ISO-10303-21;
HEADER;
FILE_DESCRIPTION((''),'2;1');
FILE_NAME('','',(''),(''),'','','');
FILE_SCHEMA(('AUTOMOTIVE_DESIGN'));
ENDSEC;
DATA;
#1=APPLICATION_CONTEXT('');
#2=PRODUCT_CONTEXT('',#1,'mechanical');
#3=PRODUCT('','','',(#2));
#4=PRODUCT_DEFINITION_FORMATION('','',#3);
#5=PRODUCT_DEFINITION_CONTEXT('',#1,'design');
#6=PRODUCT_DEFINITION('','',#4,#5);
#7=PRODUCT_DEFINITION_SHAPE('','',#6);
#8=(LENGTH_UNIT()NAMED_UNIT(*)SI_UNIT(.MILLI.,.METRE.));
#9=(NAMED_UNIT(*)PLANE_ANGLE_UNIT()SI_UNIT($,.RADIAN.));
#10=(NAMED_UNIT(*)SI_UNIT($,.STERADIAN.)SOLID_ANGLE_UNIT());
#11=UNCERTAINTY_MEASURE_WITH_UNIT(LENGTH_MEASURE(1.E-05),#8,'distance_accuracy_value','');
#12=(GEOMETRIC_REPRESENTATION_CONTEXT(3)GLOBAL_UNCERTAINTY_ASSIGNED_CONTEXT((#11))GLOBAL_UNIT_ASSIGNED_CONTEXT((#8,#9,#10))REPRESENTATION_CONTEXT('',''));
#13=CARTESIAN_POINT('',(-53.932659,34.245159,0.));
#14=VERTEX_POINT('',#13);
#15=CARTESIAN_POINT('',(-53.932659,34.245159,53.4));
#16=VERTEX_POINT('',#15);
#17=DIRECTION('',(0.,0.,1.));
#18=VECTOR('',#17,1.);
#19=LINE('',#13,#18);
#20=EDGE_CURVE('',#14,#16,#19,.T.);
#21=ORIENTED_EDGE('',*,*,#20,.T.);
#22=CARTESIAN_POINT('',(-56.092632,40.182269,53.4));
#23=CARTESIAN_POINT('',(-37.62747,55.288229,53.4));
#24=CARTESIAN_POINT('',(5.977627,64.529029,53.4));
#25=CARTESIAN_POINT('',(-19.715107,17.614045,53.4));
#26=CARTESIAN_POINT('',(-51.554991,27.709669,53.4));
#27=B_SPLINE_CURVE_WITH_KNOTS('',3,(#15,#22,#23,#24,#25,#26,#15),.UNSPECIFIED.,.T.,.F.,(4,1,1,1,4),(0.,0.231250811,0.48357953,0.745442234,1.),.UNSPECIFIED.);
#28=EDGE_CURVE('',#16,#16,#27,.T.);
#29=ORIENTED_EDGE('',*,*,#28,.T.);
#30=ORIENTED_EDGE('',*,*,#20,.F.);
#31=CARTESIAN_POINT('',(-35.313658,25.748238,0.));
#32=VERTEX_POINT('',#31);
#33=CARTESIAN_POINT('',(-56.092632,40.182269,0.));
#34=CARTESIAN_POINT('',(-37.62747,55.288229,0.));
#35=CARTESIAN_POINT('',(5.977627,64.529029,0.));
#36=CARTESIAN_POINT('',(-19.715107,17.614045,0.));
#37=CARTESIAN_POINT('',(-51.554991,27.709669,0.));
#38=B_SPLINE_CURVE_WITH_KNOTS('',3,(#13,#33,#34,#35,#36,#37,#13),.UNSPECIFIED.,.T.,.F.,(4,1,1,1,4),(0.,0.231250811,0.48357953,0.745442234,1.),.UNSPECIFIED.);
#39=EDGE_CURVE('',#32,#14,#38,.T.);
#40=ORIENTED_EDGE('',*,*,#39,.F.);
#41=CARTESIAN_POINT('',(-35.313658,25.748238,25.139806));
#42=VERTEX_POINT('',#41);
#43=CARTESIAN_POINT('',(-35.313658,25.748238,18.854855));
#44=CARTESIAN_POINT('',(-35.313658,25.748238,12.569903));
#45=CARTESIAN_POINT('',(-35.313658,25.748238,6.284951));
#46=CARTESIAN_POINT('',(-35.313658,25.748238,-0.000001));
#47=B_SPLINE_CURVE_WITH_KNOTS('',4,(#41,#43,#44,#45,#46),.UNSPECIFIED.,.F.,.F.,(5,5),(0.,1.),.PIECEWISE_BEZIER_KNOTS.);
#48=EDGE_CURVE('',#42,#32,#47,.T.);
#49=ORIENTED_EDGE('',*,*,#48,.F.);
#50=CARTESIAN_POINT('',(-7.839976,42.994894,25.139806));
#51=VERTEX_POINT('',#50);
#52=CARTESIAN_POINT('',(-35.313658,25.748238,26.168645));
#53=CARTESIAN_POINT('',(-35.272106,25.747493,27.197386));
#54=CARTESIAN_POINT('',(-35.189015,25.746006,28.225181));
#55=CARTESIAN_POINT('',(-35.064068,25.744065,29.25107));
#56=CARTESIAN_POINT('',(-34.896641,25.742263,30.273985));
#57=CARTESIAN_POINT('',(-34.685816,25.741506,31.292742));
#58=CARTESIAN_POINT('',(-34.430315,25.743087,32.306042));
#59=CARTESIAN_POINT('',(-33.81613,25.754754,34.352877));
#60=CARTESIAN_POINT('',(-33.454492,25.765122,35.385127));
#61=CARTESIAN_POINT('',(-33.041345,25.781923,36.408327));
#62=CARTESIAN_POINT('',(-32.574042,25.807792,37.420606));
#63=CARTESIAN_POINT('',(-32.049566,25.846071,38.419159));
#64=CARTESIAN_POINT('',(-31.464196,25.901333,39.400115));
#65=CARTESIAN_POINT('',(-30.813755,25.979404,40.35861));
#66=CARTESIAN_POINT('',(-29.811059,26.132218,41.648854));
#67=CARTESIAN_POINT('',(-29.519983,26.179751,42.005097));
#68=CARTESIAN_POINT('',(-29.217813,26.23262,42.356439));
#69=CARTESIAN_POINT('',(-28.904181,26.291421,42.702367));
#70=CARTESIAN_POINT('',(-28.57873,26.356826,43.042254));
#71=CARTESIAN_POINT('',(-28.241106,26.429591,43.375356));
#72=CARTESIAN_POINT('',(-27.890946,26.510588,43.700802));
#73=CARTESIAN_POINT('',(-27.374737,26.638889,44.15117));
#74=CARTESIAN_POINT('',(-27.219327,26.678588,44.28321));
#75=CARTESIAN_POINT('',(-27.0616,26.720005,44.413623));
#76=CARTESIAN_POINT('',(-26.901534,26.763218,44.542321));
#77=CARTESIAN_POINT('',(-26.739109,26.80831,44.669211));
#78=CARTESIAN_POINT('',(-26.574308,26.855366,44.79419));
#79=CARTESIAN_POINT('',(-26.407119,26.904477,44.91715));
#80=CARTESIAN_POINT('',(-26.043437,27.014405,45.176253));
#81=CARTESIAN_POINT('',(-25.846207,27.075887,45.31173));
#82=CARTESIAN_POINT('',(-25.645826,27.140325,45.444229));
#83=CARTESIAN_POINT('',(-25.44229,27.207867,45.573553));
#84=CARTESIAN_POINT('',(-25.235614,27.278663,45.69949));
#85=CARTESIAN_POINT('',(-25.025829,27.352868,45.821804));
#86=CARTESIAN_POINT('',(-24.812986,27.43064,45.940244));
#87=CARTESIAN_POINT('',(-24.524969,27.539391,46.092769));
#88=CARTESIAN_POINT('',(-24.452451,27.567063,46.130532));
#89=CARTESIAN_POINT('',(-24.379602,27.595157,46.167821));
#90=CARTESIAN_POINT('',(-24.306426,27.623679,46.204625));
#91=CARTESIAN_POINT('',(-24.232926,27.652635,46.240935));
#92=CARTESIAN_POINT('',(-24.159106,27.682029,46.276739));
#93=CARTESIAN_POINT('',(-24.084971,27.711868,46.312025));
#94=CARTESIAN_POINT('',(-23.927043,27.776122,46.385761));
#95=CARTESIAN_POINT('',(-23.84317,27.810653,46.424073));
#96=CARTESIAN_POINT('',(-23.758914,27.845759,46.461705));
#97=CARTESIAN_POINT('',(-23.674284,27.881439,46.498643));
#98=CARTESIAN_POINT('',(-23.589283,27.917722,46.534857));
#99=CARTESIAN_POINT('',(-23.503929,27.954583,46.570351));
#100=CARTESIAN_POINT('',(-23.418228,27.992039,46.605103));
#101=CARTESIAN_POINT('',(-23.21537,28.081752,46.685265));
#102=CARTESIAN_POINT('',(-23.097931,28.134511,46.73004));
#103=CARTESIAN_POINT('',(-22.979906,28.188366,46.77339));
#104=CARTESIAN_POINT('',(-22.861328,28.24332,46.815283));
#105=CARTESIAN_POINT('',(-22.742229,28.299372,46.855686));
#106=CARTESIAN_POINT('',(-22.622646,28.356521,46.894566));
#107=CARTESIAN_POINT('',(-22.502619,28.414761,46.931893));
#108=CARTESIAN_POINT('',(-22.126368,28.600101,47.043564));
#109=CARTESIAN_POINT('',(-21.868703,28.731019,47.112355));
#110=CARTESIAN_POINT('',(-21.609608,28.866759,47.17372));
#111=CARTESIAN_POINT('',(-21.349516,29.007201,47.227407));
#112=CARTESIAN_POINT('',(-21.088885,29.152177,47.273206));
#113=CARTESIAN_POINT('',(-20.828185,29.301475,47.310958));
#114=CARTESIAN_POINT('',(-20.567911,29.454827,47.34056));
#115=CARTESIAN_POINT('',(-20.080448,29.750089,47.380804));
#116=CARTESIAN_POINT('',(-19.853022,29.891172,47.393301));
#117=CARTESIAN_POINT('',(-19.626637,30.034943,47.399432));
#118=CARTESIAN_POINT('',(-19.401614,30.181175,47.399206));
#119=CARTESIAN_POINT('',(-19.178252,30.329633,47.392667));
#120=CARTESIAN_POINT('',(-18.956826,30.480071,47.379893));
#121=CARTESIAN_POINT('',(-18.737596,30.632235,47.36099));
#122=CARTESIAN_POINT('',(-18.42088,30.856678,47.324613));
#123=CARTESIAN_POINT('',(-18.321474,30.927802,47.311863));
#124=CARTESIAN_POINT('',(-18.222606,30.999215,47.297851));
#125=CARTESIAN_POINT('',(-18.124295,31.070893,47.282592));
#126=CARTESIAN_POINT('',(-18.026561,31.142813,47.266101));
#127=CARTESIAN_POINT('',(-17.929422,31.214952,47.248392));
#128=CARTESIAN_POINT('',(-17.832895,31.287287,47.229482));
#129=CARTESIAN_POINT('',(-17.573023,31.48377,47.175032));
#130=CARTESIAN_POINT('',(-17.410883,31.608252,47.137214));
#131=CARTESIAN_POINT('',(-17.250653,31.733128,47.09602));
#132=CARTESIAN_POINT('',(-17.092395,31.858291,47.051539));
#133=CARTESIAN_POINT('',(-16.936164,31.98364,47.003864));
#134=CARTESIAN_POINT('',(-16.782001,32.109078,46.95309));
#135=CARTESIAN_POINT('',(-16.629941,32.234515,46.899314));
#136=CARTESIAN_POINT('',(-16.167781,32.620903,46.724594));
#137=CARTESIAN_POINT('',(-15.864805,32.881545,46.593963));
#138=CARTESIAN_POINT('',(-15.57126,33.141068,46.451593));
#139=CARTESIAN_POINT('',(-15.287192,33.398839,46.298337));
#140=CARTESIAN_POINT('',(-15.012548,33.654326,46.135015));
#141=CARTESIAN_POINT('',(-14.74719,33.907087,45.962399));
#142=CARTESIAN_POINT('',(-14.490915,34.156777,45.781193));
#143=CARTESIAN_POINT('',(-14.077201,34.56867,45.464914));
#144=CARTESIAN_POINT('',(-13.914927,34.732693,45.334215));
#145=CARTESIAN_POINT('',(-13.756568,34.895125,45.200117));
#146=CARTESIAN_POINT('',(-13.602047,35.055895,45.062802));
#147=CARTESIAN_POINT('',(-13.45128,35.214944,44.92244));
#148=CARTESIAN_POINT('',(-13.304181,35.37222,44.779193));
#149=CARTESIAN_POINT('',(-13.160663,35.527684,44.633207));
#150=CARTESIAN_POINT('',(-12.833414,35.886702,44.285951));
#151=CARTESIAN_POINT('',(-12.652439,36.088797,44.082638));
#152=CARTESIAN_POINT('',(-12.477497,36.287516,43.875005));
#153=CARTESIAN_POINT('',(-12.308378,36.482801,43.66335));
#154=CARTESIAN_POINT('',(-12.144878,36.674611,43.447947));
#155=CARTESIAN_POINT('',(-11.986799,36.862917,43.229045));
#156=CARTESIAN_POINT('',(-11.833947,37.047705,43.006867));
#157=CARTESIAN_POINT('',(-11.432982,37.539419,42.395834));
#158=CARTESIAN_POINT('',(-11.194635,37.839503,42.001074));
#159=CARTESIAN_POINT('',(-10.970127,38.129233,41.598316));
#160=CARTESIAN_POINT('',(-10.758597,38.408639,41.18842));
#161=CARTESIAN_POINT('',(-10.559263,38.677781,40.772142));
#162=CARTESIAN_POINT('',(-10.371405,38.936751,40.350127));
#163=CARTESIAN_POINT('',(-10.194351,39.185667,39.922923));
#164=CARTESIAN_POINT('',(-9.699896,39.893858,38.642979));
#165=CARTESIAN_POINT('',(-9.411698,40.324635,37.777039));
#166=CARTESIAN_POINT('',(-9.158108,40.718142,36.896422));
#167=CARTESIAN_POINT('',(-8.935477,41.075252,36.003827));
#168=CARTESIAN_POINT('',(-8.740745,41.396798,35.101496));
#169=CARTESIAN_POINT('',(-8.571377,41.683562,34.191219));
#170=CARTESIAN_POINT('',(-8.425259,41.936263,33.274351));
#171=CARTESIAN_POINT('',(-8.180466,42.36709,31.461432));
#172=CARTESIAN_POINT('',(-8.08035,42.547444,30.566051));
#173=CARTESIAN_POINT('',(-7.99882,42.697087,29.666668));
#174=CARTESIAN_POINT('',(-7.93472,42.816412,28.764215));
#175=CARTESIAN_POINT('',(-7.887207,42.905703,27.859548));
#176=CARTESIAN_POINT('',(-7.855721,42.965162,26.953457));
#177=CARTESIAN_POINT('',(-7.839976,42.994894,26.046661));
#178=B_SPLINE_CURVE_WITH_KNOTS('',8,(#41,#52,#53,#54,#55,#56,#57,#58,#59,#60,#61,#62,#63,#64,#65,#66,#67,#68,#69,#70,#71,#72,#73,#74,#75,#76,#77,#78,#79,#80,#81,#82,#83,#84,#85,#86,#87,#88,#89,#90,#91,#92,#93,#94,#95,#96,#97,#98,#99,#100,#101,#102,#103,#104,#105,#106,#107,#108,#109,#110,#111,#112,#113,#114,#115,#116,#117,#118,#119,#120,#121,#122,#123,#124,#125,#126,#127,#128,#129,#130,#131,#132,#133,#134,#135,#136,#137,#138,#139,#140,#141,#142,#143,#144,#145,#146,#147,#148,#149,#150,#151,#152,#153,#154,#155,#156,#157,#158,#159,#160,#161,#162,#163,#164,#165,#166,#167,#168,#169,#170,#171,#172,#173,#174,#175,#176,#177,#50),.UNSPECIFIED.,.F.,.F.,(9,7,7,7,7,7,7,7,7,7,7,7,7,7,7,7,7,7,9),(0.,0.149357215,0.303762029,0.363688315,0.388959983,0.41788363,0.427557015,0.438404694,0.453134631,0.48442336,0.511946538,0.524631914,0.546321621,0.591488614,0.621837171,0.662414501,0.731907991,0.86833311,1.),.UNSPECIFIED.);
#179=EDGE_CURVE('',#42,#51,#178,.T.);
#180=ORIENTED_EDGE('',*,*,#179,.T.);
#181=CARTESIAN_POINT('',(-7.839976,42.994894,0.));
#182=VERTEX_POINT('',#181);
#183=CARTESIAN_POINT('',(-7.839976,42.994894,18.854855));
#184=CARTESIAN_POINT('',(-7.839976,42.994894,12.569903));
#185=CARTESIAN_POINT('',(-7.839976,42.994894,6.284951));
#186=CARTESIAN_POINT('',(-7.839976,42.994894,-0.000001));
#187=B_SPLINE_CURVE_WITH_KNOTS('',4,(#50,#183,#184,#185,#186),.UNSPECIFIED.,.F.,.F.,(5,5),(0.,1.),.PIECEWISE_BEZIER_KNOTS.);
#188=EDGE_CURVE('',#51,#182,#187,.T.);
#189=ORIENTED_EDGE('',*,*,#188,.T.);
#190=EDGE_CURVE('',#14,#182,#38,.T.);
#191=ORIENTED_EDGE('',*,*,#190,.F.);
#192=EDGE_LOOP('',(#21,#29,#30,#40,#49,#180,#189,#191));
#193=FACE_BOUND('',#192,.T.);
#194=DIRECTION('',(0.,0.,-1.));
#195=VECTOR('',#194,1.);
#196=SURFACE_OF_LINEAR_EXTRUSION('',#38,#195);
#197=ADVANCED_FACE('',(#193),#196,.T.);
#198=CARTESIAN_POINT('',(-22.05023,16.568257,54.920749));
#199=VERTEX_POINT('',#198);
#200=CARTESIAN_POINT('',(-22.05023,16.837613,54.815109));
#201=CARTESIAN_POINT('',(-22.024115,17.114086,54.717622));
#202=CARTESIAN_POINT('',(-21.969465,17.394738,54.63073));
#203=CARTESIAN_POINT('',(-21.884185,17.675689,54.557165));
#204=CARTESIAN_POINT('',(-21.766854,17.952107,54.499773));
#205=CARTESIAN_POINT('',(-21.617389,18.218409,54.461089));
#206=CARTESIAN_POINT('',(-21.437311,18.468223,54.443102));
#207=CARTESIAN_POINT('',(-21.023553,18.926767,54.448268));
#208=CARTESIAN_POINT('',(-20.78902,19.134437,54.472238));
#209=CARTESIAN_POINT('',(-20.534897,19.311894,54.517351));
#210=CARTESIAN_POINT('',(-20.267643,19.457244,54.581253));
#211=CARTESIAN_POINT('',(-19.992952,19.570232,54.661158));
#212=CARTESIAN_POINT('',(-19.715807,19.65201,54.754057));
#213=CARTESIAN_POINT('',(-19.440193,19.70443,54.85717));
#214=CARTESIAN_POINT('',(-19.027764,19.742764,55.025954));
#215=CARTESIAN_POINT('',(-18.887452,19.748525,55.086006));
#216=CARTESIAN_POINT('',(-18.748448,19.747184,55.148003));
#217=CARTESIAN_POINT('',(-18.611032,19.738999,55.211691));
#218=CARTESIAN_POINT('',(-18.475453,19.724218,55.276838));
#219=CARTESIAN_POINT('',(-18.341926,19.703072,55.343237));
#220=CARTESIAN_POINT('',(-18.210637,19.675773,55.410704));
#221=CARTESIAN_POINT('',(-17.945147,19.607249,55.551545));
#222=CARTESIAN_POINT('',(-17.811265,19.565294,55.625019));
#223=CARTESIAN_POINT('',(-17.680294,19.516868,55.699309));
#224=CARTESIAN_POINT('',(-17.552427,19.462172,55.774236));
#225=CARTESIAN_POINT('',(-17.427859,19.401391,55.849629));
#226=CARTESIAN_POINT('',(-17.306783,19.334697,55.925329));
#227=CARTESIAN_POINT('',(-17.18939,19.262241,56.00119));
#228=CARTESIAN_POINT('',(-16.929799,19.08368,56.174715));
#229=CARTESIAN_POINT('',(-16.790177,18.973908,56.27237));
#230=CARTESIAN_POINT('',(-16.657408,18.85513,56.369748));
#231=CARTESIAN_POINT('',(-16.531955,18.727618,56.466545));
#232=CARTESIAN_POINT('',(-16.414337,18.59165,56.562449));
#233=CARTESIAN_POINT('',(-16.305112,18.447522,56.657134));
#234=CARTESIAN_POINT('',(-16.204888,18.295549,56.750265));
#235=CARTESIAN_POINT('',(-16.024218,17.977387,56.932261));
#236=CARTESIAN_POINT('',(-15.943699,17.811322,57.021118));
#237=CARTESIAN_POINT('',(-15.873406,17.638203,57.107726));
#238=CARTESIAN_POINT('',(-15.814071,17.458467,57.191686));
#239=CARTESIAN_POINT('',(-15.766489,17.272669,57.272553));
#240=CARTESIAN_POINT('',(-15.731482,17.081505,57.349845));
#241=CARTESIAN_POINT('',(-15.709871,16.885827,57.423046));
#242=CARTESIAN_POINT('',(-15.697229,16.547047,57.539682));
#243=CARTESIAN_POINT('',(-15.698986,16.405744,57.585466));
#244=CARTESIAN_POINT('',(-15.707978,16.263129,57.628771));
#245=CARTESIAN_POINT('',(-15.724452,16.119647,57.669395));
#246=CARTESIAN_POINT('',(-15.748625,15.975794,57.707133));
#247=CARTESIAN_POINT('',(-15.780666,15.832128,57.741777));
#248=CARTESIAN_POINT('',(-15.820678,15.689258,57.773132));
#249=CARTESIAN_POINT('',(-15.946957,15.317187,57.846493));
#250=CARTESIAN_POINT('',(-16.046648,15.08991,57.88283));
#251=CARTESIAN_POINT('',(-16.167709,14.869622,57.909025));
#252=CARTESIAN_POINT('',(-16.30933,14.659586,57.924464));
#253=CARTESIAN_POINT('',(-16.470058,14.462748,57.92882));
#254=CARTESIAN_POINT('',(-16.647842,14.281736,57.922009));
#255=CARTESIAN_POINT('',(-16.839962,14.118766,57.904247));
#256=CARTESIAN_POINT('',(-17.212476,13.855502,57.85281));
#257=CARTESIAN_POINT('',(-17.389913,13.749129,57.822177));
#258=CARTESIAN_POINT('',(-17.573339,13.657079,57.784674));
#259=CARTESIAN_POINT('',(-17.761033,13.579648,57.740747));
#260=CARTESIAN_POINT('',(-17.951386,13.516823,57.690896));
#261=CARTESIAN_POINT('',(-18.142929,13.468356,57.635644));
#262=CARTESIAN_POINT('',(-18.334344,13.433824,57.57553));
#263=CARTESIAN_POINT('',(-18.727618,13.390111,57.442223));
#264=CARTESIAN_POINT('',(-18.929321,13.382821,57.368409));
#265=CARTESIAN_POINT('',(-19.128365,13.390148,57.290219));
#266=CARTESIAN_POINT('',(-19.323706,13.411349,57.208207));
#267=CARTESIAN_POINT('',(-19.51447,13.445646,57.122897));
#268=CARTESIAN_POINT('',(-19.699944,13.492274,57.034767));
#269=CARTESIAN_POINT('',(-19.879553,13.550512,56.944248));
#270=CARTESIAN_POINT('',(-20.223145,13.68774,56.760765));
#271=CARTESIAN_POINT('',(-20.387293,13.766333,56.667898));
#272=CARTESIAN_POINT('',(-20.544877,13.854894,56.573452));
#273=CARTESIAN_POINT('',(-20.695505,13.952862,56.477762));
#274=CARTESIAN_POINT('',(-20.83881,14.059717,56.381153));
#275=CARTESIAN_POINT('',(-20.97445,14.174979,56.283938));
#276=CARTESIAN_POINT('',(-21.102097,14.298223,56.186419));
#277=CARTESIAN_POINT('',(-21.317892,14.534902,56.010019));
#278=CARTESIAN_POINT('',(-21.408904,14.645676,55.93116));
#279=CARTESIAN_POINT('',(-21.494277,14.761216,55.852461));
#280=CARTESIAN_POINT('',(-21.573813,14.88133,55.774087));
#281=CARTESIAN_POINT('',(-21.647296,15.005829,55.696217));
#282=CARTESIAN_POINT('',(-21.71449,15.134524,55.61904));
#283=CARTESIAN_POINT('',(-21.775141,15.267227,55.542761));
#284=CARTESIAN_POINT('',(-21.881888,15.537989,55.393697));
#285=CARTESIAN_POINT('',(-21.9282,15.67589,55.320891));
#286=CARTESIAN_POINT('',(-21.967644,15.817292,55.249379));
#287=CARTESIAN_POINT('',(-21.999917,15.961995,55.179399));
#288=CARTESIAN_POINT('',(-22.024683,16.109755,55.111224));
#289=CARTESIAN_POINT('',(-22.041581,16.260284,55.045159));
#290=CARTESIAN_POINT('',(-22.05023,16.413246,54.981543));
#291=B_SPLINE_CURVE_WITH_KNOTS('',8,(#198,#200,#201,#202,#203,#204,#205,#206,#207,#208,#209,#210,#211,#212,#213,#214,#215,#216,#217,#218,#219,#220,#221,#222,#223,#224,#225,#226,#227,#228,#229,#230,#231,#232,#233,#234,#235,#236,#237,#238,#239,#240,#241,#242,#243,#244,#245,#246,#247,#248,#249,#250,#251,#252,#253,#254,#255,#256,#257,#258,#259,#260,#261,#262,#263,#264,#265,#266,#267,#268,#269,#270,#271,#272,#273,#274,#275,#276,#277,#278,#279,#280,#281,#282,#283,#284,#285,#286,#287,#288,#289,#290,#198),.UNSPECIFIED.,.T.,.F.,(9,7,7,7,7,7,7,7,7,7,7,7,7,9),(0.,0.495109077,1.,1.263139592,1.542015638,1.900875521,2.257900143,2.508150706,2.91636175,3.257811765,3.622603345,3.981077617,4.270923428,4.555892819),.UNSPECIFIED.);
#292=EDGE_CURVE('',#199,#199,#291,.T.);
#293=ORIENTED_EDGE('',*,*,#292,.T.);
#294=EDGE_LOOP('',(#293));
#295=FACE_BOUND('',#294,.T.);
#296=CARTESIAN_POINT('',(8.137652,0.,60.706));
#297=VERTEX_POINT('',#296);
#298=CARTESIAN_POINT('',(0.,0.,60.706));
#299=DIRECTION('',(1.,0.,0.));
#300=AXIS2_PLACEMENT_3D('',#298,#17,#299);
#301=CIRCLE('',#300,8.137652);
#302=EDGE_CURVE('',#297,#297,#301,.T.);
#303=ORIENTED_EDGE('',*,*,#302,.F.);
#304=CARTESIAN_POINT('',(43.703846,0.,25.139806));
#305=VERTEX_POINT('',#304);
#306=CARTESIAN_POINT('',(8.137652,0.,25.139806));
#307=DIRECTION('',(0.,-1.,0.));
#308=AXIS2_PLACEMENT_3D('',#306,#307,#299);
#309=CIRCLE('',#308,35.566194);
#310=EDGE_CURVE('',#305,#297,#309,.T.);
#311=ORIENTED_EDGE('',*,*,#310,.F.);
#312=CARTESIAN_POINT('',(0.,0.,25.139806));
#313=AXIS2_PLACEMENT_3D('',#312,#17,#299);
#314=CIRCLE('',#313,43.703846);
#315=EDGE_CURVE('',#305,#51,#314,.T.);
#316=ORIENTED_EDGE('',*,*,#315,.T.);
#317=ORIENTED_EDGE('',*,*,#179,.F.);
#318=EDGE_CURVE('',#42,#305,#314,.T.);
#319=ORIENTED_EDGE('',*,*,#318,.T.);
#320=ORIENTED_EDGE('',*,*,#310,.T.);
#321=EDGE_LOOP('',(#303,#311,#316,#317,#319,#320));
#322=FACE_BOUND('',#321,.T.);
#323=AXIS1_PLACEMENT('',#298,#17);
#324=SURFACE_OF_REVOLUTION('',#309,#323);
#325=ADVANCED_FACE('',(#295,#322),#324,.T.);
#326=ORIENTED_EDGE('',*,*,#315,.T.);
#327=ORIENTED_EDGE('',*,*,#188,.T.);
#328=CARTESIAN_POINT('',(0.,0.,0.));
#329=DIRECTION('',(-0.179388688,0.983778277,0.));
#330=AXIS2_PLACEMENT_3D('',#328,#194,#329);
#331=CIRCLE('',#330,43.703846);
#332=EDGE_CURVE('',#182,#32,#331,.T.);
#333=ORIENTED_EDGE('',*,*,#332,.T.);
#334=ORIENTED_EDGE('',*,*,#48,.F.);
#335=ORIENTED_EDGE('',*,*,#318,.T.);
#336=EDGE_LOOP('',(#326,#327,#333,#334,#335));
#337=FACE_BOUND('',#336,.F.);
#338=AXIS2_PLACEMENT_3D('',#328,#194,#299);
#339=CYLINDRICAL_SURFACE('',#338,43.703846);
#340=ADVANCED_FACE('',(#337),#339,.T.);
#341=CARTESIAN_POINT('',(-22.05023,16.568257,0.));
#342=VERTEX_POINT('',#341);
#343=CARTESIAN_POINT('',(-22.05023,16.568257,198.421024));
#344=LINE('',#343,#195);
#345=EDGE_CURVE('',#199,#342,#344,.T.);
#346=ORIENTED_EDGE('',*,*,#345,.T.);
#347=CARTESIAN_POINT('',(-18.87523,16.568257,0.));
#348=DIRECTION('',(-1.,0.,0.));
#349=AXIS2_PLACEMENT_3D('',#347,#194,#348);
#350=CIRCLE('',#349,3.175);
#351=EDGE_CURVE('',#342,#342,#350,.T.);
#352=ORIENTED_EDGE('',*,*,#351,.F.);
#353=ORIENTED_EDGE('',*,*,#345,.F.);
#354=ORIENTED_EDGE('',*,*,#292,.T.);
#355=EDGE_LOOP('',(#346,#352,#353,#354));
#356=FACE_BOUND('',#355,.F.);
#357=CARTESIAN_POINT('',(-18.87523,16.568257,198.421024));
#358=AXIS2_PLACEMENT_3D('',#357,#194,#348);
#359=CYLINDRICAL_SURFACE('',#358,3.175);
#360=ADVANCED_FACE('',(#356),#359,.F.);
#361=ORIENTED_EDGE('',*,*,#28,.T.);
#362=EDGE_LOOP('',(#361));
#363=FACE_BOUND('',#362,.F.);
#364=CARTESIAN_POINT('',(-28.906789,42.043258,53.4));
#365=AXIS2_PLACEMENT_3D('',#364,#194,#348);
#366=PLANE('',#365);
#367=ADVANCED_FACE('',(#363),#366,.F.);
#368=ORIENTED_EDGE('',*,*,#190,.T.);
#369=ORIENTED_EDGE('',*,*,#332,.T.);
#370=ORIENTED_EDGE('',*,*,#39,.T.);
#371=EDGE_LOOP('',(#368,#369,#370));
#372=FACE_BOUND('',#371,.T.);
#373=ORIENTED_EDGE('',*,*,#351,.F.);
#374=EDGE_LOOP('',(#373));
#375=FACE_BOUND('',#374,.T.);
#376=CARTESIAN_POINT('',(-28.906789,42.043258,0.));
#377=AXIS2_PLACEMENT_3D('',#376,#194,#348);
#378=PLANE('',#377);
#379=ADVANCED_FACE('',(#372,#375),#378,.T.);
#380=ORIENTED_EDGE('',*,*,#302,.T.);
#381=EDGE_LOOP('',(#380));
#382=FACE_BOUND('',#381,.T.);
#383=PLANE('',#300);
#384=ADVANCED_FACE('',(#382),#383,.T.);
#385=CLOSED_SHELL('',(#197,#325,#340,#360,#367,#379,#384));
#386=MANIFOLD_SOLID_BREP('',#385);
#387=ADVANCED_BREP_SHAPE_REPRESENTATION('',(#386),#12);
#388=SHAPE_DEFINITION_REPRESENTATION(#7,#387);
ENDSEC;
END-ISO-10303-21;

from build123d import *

# Parameters (mm, degrees)
F0_R     = 43.7038461673
F1_DEPTH = 60.706
F3_D     = 6.35
F6_DEPTH = 53.4


# Not quite as in the source:
# - a fillet or chamfer that OpenCascade refuses, or shapes differently, is made with other operations: its cross-section is extruded or revolved along the edge and cut away or added


with BuildPart() as f1:
    # F0 (on Top) → F1 (new body)
    with BuildSketch(Plane.XY):
        Circle(F0_R)
    extrude(amount=F1_DEPTH)

    # F3 (through all)
    with Locations(Plane.XY.offset(60.706)):
        with Locations((-18.8752301037, 16.5682565421)):
            Hole(F3_D / 2)

    # F4: fillet of radius 35.5661942009 on 1 edges, made by hand

    # F4_s1 → F4_t2 (revolve, cut)
    with BuildSketch(Plane.XZ):
        with BuildLine():
            ThreePointArc((43.7038461673, 25.1398057991), (33.2867490669, 50.2889028996), (8.1376519665, 60.706))
            Line((8.1376519665, 60.706), (43.7038461673, 60.706))
            Line((43.7038461673, 60.706), (43.7038461673, 25.1398057991))
        make_face()
    revolve(axis=Axis((0, 0, 60.706), (0, 0, 1)), mode=Mode.SUBTRACT)

    # F5 (on Top) → F6 (join)
    with BuildSketch(Plane.XY):
        with BuildLine():
            add(Edge.make_bspline(
                [(-53.932659328, 34.245159477), (-56.092631888, 40.1822694312), (-37.6274698884, 55.2882292442), (5.9776268015, 64.529029477), (-19.7151067113, 17.6140446523), (-51.5549907385, 27.7096691138), (-53.932659328, 34.245159477)],
                knots=[0, 0, 0, 0, 0.2312508113, 0.4835795296, 0.7454422336, 1, 1, 1, 1], degree=3))
        make_face()
    extrude(amount=F6_DEPTH)


solid = f1.part
